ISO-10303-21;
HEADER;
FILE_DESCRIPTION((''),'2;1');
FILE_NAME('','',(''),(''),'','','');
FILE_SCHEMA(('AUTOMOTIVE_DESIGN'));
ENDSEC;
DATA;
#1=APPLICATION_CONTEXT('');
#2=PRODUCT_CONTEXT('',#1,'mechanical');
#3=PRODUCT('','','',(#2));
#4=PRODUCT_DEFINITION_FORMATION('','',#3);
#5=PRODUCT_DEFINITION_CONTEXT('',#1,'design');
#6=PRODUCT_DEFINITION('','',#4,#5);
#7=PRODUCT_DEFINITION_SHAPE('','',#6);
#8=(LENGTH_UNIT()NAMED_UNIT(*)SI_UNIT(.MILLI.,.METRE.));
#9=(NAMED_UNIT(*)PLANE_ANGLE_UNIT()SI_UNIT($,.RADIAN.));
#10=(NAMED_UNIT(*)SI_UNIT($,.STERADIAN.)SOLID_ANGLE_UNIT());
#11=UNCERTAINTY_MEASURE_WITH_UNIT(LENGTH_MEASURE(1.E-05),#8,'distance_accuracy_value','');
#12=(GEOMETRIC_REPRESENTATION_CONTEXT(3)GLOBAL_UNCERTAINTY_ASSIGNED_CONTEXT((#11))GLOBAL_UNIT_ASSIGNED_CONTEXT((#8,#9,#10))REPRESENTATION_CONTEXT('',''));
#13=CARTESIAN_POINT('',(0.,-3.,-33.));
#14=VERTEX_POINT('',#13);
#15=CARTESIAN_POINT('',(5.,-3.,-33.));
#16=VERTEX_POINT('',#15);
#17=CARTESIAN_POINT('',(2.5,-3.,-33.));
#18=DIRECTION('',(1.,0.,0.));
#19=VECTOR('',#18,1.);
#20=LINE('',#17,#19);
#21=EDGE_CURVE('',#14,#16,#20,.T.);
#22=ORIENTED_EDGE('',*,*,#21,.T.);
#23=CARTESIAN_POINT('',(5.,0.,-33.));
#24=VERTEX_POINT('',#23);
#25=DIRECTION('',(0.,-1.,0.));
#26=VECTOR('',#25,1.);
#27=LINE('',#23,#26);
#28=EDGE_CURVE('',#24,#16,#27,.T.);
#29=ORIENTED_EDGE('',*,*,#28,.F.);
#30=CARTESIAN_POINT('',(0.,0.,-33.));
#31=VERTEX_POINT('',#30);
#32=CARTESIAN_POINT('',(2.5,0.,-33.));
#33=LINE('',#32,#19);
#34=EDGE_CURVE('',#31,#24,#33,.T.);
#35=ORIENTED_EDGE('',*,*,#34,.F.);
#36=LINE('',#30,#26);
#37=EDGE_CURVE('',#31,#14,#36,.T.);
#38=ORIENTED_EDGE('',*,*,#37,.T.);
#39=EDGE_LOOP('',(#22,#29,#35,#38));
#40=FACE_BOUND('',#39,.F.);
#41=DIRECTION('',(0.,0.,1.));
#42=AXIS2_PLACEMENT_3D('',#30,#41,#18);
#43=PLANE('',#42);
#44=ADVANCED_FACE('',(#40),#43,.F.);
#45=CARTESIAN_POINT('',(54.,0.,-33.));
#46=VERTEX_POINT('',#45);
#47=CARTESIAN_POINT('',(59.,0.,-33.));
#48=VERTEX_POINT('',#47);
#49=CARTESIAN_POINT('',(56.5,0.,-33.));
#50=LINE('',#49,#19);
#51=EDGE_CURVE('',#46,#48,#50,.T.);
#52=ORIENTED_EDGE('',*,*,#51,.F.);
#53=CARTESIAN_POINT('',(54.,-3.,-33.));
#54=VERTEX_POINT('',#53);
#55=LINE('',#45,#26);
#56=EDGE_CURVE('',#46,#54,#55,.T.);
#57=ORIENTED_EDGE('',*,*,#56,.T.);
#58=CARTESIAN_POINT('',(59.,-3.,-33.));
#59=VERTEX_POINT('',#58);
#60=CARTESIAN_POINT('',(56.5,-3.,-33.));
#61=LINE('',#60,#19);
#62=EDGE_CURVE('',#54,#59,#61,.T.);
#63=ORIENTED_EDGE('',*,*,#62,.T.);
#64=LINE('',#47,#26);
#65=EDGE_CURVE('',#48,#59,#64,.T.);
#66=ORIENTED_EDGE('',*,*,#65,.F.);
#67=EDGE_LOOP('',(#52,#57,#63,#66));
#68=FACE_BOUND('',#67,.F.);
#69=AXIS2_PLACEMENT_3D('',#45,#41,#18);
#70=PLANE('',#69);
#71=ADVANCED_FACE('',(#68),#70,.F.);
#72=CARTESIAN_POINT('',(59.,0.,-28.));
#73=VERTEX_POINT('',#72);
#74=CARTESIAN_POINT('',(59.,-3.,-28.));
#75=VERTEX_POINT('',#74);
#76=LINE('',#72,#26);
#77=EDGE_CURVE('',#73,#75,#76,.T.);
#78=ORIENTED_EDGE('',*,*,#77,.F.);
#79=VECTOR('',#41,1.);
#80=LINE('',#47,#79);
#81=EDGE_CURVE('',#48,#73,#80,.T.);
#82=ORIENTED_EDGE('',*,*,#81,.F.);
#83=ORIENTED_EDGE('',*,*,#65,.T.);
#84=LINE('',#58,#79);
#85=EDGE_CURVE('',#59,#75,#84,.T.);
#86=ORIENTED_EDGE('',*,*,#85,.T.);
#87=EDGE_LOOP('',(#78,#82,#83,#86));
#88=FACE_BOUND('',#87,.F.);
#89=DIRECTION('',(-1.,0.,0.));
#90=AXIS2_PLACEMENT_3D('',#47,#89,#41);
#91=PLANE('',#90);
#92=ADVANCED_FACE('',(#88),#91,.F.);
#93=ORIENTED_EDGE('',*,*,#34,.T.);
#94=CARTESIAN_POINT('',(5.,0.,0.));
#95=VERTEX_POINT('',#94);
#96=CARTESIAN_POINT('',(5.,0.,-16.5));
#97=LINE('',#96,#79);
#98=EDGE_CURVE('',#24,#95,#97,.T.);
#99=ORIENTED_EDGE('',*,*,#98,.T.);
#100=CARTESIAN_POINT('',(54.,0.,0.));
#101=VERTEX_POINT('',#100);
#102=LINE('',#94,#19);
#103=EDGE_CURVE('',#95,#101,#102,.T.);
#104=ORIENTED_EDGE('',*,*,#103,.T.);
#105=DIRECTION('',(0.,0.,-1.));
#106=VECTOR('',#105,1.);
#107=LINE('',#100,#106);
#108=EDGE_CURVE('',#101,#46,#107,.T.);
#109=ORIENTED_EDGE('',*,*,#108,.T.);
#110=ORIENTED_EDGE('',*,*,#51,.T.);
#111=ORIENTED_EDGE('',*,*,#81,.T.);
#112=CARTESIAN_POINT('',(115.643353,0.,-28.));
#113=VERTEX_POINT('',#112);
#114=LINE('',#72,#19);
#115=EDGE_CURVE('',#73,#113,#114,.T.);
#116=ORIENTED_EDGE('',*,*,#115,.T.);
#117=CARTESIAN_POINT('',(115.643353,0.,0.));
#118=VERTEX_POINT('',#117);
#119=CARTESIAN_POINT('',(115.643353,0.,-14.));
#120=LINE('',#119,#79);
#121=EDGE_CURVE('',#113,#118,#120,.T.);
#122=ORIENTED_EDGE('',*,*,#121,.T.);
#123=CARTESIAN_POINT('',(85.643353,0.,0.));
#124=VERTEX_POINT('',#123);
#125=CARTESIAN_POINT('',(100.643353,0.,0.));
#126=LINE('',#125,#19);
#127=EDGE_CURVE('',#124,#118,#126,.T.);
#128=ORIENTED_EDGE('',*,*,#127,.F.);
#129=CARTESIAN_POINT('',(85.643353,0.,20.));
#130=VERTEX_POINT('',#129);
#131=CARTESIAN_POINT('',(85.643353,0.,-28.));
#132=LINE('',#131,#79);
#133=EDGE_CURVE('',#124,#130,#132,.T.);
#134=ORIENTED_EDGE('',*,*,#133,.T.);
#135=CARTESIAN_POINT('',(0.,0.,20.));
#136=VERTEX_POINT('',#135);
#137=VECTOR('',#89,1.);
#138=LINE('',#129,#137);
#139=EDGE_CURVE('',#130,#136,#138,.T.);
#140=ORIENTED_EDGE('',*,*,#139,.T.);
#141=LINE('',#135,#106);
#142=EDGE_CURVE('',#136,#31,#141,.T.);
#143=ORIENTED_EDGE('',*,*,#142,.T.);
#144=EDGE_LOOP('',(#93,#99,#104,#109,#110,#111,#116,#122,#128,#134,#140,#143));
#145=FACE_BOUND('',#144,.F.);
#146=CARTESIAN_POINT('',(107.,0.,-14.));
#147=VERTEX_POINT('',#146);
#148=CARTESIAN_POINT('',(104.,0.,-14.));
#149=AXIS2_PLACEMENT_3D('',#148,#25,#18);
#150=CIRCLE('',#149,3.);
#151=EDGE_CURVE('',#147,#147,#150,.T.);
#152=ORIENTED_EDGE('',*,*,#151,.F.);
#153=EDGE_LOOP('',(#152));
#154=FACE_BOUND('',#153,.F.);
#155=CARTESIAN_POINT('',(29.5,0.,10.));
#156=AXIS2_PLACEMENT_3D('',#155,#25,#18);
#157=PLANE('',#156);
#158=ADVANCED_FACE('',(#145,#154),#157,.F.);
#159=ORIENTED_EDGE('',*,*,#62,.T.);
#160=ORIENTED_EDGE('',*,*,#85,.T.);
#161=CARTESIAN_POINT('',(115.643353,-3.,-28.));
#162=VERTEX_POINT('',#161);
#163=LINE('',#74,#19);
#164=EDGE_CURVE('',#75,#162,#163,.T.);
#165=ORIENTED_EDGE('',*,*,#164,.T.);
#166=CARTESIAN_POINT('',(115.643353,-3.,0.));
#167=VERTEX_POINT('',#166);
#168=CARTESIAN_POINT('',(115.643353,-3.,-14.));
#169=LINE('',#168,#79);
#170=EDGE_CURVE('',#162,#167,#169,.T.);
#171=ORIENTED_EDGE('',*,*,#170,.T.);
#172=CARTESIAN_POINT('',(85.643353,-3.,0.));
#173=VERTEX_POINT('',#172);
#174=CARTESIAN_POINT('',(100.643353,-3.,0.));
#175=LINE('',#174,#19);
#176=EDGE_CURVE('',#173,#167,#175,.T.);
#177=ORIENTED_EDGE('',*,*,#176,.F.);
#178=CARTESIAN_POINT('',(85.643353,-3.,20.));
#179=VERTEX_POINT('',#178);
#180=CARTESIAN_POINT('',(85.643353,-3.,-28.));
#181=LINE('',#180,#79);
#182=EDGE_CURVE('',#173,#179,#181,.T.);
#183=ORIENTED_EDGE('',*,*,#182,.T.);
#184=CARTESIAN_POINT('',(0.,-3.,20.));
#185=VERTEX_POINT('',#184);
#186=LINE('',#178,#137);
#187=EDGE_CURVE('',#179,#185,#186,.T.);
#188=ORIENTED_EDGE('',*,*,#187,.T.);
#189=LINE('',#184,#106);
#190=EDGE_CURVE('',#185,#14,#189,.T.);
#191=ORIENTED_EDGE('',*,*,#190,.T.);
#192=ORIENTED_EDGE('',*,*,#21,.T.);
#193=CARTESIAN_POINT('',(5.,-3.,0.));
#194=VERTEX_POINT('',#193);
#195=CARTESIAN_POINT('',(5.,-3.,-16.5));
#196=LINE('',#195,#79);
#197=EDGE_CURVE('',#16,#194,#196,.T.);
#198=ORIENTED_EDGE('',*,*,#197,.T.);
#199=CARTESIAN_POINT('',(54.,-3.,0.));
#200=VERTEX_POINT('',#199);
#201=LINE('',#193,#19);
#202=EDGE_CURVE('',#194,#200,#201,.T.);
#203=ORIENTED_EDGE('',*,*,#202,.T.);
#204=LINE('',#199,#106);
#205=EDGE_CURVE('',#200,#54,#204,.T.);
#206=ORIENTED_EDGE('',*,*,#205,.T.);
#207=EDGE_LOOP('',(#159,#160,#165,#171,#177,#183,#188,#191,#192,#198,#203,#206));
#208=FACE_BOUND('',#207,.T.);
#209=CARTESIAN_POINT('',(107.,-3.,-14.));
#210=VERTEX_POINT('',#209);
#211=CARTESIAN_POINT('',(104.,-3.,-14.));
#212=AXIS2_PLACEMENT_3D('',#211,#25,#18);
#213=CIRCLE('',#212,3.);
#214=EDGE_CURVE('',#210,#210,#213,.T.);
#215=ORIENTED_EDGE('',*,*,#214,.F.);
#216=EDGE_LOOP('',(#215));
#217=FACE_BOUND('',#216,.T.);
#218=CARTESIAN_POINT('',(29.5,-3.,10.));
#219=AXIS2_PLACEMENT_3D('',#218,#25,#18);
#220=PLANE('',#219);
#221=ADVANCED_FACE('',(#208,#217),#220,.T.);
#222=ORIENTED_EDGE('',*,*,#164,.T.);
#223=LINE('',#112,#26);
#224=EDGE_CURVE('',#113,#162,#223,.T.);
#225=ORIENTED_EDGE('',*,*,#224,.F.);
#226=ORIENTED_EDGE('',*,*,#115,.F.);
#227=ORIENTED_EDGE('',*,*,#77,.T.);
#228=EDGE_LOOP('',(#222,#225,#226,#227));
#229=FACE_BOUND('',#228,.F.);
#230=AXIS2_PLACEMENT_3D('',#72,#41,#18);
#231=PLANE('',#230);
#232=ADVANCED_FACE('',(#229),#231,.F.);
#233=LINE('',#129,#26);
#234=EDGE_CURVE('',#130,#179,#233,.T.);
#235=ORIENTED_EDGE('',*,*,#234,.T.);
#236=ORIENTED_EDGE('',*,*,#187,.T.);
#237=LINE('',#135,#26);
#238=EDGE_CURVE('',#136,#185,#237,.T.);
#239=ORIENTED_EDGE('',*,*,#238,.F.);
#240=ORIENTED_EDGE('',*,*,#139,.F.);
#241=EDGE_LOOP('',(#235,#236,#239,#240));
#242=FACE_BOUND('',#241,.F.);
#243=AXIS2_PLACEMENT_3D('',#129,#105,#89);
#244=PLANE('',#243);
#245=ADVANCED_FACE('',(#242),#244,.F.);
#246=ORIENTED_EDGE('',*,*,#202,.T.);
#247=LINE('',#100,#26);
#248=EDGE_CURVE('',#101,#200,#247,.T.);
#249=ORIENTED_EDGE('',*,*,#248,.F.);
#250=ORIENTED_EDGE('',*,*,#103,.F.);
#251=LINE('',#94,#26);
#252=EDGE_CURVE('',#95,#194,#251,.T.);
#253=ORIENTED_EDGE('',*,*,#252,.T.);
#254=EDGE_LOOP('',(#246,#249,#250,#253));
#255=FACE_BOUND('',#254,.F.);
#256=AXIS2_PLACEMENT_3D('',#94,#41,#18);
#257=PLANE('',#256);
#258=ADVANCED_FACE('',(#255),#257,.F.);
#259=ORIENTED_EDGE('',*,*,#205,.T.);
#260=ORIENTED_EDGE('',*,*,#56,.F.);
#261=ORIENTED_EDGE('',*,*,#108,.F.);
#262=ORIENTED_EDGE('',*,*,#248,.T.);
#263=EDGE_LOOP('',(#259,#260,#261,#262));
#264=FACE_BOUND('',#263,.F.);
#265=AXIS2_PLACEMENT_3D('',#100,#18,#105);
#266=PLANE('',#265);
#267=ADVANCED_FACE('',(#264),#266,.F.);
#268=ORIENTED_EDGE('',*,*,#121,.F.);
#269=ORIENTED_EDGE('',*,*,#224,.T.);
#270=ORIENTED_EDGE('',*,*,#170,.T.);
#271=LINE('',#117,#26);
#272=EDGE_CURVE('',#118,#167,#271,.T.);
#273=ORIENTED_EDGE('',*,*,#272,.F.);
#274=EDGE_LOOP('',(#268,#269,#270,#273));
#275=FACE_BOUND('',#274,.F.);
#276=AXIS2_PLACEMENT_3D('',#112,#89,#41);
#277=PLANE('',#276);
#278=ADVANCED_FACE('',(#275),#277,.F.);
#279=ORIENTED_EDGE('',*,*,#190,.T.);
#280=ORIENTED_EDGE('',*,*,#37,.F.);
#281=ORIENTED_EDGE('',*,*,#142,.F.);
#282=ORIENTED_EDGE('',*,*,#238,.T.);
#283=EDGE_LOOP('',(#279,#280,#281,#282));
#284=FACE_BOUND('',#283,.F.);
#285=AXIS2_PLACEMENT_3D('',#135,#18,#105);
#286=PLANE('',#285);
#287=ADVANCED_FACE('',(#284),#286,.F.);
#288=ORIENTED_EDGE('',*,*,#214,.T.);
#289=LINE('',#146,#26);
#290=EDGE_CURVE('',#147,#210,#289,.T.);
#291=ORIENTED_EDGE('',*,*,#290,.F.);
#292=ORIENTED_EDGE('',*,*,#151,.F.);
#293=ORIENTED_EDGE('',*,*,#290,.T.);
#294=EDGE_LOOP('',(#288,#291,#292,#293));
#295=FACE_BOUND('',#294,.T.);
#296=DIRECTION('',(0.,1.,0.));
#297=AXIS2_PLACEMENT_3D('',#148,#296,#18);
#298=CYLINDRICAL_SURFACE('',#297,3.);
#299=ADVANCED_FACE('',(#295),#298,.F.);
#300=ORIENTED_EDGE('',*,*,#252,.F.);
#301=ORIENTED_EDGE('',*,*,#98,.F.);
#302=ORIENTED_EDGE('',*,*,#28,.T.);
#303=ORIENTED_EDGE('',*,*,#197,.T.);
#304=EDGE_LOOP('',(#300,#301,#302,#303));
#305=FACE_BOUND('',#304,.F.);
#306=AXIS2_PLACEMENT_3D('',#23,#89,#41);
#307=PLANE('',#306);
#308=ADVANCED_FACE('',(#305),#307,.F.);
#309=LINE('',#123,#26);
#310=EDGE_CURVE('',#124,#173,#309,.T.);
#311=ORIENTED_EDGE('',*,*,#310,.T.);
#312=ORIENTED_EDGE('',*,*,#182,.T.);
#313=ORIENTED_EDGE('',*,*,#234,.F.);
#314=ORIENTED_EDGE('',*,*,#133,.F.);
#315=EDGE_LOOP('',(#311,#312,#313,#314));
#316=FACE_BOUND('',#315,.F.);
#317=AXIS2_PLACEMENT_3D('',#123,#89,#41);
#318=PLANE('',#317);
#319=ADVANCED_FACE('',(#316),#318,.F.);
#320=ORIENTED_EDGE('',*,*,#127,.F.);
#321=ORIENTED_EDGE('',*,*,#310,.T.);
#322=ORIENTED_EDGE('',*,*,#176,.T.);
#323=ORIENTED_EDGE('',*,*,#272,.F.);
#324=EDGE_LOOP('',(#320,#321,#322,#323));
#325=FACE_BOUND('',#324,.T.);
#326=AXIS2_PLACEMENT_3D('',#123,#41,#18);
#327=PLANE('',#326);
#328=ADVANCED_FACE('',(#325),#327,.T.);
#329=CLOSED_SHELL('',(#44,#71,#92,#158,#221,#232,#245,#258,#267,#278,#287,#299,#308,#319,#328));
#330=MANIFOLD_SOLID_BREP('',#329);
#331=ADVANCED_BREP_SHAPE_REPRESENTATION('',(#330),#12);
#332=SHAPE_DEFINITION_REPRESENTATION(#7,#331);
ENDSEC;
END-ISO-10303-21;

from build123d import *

# Parameters (mm, degrees)
F0_W     = 49
F0_H     = 20
F0_W_2   = 5
F0_H_2   = 33
F0_H_3   = 28
F0_H_4   = 5
F0_W_3   = 26.6433528662
F0_W_4   = 30
F0_R     = 3
F1_DEPTH = 3


# Not quite as in the source:
# - a feature names something its author has since deleted; it is built from what else it names


with BuildPart() as f1:
    # F0 (on Front) → F1 (new body)
    with BuildSketch(Plane.XZ):
        with Locations((29.5, 10)):
            Rectangle(F0_W, F0_H)
        with Locations((2.5, 10)):
            Rectangle(F0_W_2, F0_H)
        with Locations((2.5, -16.5)):
            Rectangle(F0_W_2, F0_H_2)
        with Locations((56.5, 10)):
            Rectangle(F0_W_2, F0_H)
        with Locations((56.5, -14)):
            Rectangle(F0_W_2, F0_H_3)
        with Locations((56.5, -30.5)):
            Rectangle(F0_W_2, F0_H_4)
        with Locations((72.3216764331, -14)):
            Rectangle(F0_W_3, F0_H_3)
        with Locations((72.3216764331, 10)):
            Rectangle(F0_W_3, F0_H)
        with Locations((100.6433528662, -14)):
            Rectangle(F0_W_4, F0_H_3)
        with Locations((104, -14)):
            Circle(F0_R, mode=Mode.SUBTRACT)
    extrude(amount=F1_DEPTH)


solid = f1.part
